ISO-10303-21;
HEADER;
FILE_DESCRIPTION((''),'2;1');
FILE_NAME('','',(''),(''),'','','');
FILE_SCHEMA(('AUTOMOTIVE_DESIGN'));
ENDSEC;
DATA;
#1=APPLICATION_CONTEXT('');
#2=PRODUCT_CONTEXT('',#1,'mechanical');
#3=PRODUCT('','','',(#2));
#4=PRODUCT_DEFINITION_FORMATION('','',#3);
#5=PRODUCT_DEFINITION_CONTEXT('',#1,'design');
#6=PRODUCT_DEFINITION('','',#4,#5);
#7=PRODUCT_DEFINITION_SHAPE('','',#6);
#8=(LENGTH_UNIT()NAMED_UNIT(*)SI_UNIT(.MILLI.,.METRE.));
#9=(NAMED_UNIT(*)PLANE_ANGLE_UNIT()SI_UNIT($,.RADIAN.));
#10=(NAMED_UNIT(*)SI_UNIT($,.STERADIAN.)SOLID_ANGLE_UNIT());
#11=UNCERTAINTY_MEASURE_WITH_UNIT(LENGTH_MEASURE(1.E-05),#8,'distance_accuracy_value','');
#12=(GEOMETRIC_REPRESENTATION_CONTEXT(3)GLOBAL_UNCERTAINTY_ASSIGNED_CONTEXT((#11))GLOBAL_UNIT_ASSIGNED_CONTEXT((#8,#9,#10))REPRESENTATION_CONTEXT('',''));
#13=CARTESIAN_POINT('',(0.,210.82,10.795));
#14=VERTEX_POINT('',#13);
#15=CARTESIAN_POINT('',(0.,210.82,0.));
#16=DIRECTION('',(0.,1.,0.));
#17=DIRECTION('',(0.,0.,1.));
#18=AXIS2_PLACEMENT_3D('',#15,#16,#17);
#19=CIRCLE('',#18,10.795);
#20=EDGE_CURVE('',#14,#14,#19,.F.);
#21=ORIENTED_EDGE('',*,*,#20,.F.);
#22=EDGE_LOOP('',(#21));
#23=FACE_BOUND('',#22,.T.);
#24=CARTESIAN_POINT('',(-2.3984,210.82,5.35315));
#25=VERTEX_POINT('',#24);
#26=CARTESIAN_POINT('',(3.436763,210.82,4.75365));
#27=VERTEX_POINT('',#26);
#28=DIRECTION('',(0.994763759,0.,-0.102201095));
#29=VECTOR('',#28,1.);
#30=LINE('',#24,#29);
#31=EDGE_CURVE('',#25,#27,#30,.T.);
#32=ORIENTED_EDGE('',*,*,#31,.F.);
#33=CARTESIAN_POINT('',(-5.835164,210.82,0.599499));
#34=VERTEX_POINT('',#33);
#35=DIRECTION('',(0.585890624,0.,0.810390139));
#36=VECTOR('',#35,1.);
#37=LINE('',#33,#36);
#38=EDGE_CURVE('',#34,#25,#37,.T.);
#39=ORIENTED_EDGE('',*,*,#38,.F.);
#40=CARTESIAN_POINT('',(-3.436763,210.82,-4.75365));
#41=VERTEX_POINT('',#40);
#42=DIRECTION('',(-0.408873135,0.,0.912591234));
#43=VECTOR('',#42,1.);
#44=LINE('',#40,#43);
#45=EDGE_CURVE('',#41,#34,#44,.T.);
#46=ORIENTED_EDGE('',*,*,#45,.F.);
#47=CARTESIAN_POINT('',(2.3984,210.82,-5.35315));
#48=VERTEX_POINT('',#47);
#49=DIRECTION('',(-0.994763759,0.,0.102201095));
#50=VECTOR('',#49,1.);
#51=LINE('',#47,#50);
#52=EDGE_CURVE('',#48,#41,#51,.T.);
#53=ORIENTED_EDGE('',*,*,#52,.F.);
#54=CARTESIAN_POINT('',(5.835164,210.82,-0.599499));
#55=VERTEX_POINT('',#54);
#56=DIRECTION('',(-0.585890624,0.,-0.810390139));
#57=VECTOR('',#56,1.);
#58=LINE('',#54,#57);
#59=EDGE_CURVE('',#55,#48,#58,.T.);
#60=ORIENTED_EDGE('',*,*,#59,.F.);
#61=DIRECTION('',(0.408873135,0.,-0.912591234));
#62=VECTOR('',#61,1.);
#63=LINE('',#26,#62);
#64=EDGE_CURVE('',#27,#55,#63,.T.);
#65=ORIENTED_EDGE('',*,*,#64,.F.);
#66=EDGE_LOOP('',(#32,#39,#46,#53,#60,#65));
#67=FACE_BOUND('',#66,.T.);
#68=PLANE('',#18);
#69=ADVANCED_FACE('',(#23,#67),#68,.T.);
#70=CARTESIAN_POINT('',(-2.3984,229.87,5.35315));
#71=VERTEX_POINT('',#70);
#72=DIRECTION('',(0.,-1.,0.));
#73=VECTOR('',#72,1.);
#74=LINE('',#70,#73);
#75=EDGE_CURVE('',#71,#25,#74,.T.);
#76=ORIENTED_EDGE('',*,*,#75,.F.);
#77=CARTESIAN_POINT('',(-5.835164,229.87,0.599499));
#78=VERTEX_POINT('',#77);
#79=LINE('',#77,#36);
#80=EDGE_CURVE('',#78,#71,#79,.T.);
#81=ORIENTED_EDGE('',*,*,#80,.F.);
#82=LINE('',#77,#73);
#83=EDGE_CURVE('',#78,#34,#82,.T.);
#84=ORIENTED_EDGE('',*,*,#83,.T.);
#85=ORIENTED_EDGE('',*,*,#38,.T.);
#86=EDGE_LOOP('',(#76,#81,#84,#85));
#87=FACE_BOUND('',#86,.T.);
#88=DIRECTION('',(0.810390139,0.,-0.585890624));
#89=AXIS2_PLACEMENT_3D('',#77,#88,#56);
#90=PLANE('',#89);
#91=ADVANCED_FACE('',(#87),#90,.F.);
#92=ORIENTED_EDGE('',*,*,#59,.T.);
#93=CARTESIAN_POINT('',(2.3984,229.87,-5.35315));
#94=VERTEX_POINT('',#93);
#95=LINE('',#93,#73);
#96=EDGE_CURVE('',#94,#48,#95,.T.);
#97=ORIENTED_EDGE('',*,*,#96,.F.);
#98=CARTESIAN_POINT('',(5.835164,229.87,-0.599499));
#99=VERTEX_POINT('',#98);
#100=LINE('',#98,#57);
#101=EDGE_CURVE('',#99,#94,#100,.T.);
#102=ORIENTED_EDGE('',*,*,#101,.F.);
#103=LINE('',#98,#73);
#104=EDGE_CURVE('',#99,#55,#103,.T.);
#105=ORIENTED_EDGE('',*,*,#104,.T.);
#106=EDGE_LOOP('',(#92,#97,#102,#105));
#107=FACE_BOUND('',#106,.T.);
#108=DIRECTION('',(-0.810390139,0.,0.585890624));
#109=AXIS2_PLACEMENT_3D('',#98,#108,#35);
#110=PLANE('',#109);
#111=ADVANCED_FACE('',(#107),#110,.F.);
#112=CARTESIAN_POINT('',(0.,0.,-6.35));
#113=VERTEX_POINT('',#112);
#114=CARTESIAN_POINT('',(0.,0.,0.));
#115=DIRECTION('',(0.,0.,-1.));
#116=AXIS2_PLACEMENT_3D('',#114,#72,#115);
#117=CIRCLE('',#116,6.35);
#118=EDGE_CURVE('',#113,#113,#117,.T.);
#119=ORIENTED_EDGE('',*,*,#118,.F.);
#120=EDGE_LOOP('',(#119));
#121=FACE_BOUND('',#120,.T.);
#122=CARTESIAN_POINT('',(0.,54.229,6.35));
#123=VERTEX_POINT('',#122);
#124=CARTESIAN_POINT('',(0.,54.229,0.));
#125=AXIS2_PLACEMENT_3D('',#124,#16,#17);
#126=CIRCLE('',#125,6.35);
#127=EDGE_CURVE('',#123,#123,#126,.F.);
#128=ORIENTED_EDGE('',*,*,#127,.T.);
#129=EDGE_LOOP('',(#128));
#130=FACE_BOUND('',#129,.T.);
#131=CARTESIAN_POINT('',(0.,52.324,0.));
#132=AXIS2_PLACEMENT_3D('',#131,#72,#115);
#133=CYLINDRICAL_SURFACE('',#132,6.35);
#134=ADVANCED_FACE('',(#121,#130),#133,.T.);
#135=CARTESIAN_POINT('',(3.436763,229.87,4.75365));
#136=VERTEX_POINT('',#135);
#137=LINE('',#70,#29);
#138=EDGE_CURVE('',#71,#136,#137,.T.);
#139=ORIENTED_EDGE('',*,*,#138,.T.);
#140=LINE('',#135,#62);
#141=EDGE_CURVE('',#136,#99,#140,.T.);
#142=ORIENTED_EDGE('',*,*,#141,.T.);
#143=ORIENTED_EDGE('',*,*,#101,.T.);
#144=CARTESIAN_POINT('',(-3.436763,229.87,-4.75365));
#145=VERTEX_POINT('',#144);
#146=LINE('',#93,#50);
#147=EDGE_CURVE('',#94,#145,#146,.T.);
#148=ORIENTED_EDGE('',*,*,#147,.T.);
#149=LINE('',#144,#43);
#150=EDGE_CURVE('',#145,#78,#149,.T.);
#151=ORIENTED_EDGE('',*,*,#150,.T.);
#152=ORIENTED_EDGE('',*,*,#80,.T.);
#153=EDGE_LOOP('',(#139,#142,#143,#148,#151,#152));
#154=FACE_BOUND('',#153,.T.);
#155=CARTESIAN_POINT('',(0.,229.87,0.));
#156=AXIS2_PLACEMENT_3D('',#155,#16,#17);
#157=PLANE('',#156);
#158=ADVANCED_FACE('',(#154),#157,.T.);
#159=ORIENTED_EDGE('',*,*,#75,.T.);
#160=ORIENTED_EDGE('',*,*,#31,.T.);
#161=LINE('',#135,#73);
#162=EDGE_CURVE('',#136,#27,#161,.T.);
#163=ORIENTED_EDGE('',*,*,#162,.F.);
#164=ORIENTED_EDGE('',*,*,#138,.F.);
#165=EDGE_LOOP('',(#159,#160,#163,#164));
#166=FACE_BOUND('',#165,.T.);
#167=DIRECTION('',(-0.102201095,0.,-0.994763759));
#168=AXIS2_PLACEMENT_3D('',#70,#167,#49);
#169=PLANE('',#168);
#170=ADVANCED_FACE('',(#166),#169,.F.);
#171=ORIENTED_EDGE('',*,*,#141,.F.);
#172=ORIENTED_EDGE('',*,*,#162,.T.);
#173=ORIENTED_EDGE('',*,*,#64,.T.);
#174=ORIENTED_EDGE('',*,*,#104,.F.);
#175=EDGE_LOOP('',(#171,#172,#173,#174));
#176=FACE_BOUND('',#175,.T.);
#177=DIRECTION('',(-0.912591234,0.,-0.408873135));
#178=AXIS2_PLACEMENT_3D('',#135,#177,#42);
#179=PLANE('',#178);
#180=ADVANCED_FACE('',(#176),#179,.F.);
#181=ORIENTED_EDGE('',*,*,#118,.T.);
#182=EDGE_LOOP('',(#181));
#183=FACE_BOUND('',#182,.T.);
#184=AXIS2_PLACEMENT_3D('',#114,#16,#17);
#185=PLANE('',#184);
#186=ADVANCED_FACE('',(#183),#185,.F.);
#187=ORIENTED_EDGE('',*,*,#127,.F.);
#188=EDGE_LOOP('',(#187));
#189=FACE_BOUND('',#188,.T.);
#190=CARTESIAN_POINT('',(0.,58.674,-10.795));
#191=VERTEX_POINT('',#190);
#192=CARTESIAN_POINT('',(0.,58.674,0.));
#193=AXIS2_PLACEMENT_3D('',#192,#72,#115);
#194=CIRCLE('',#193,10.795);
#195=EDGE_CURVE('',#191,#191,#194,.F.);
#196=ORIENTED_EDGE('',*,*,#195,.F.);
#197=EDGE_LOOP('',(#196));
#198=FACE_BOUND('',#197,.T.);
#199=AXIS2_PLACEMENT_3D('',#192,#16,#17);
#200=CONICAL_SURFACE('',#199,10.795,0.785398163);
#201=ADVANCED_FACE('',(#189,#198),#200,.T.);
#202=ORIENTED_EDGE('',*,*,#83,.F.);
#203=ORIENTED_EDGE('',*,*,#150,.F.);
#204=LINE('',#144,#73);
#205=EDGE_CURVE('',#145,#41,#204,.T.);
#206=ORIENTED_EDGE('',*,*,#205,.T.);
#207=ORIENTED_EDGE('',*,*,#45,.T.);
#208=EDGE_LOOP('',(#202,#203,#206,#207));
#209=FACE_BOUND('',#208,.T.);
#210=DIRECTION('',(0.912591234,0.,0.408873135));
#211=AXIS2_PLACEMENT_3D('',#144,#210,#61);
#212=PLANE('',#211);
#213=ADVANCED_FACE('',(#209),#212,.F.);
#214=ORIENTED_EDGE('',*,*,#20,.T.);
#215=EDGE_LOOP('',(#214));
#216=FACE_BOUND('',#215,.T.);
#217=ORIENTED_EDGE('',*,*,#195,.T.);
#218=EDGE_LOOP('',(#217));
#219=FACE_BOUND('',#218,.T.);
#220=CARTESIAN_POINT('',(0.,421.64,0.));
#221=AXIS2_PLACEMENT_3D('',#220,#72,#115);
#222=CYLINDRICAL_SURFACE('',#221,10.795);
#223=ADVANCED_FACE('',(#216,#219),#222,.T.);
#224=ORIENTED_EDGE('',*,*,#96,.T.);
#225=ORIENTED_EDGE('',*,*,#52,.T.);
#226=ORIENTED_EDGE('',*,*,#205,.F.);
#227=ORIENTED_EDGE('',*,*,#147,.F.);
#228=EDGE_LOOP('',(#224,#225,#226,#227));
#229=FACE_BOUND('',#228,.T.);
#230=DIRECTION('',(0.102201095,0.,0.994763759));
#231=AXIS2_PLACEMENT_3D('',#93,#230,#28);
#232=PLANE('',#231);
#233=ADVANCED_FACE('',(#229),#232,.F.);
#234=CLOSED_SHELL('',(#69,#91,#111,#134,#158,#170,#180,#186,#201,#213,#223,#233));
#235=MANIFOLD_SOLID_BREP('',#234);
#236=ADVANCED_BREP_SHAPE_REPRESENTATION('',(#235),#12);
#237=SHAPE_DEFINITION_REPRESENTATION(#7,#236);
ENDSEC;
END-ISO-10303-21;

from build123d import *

# Parameters (mm, degrees)
SKETCH1_R           = 6.35
BOSS_EXTRUDE1_DEPTH = 421.64
SKETCH2_R           = 10.795
BOSS_EXTRUDE2_DEPTH = 421.64
SKETCH3_R           = 25.4
SKETCH3_R_2         = 6.35
CUT_EXTRUDE1_DEPTH  = 52.324
CUT_EXTRUDE2_START  = -57.658
SKETCH4_R           = 25.4
SKETCH4_R_2         = 6.35
CUT_EXTRUDE2_DEPTH  = 57.658
CHAMFER1_SIZE       = 6.35
SKETCH5_R           = 15.875
CUT_EXTRUDE4_DEPTH  = 212.372033273
BOSS_EXTRUDE3_DEPTH = 19.05


with BuildPart() as part:
    # Sketch1 → Boss-Extrude1 (new body)
    with BuildSketch(Plane(origin=(0, 0, 0), x_dir=(1, 0, 0), z_dir=(0, 1, 0))):
        with Locations(Location((0, 0, 0), (0, 0, 270))):
            Circle(SKETCH1_R)
    extrude(amount=BOSS_EXTRUDE1_DEPTH)

    # Sketch2 → Boss-Extrude2 (add)
    with BuildSketch(Plane(origin=(0, 0, 0), x_dir=(-1, 0, 0), z_dir=(0, -1, 0))):
        with Locations(Location((0, 0, 0), (0, 0, 90))):
            Circle(SKETCH2_R)
    extrude(amount=-BOSS_EXTRUDE2_DEPTH)

    # Sketch3 → Cut-Extrude1 (cut)
    with BuildSketch(Plane.XZ):
        Circle(SKETCH3_R)
        with Locations(Location((0, 0, 0), (0, 0, 270))):
            Circle(SKETCH3_R_2, mode=Mode.SUBTRACT)
    extrude(amount=-CUT_EXTRUDE1_DEPTH, mode=Mode.SUBTRACT)

    # Sketch4 → Cut-Extrude2 (cut)
    with BuildSketch(Plane(origin=(0, 421.64, 0), x_dir=(1, 0, 0), z_dir=(0, 1, 0)).offset(CUT_EXTRUDE2_START)):
        Circle(SKETCH4_R)
        with Locations(Location((0, 0, 0), (0, 0, 90))):
            Circle(SKETCH4_R_2, mode=Mode.SUBTRACT)
    extrude(amount=CUT_EXTRUDE2_DEPTH, mode=Mode.SUBTRACT)

    # Chamfer1
    # the kernel refuses this chamfer: 6.35 mm, written as the material it takes off along each edge
    with BuildSketch(Plane(origin=(0, 52.324, 0), x_dir=(0, 0, -1), z_dir=(-1, 0, 0))) as chamfer1_piece_1_section:
        Polygon((10.795, -CHAMFER1_SIZE), (10.795 - CHAMFER1_SIZE, 0), (10.795, 0), align=None)
    chamfer1_piece_1 = revolve(axis=Axis((0, 52.324, 0), (0, -1, 0)), mode=Mode.PRIVATE)
    chamfer1_piece_1 = chamfer1_piece_1 - Plane(origin=(0, 56.4676015, 0), x_dir=(0, 0, -1), z_dir=(0, -1, 0)) * Cylinder(6.35, 44, mode=Mode.PRIVATE)
    add(chamfer1_piece_1, mode=Mode.SUBTRACT)
    with BuildSketch(Plane(origin=(0, 363.982, 0), x_dir=(0, 0, -1), z_dir=(-1, 0, 0))) as chamfer1_piece_2_section:
        Polygon((10.795, CHAMFER1_SIZE), (10.795 - CHAMFER1_SIZE, 0), (10.795, 0), align=None)
    chamfer1_piece_2 = revolve(axis=Axis((0, 363.982, 0), (0, -1, 0)), mode=Mode.PRIVATE)
    chamfer1_piece_2 = chamfer1_piece_2 - Plane(origin=(0, 359.8383985, 0), x_dir=(0, 0, -1), z_dir=(0, -1, 0)) * Cylinder(6.35, 44, mode=Mode.PRIVATE)
    add(chamfer1_piece_2, mode=Mode.SUBTRACT)

    # Sketch5 → Cut-Extrude4 (cut, through all)
    with BuildSketch(Plane(origin=(0, 210.82, 0), x_dir=(1, 0, 0), z_dir=(0, 1, 0))):
        Circle(SKETCH5_R)
    extrude(amount=CUT_EXTRUDE4_DEPTH, mode=Mode.SUBTRACT)

    # Sketch6 → Boss-Extrude3 (add)
    with BuildSketch(Plane(origin=(0, 210.82, 0), x_dir=(1, 0, 0), z_dir=(0, 1, 0))):
        Polygon((-3.436763353, 4.753650281), (-5.83516358, -0.59949923), (-2.398400227, -5.353149511), (3.436763353, -4.753650281), (5.83516358, 0.59949923), (2.398400227, 5.353149511), align=None)
    extrude(amount=BOSS_EXTRUDE3_DEPTH)


solid = part.part
